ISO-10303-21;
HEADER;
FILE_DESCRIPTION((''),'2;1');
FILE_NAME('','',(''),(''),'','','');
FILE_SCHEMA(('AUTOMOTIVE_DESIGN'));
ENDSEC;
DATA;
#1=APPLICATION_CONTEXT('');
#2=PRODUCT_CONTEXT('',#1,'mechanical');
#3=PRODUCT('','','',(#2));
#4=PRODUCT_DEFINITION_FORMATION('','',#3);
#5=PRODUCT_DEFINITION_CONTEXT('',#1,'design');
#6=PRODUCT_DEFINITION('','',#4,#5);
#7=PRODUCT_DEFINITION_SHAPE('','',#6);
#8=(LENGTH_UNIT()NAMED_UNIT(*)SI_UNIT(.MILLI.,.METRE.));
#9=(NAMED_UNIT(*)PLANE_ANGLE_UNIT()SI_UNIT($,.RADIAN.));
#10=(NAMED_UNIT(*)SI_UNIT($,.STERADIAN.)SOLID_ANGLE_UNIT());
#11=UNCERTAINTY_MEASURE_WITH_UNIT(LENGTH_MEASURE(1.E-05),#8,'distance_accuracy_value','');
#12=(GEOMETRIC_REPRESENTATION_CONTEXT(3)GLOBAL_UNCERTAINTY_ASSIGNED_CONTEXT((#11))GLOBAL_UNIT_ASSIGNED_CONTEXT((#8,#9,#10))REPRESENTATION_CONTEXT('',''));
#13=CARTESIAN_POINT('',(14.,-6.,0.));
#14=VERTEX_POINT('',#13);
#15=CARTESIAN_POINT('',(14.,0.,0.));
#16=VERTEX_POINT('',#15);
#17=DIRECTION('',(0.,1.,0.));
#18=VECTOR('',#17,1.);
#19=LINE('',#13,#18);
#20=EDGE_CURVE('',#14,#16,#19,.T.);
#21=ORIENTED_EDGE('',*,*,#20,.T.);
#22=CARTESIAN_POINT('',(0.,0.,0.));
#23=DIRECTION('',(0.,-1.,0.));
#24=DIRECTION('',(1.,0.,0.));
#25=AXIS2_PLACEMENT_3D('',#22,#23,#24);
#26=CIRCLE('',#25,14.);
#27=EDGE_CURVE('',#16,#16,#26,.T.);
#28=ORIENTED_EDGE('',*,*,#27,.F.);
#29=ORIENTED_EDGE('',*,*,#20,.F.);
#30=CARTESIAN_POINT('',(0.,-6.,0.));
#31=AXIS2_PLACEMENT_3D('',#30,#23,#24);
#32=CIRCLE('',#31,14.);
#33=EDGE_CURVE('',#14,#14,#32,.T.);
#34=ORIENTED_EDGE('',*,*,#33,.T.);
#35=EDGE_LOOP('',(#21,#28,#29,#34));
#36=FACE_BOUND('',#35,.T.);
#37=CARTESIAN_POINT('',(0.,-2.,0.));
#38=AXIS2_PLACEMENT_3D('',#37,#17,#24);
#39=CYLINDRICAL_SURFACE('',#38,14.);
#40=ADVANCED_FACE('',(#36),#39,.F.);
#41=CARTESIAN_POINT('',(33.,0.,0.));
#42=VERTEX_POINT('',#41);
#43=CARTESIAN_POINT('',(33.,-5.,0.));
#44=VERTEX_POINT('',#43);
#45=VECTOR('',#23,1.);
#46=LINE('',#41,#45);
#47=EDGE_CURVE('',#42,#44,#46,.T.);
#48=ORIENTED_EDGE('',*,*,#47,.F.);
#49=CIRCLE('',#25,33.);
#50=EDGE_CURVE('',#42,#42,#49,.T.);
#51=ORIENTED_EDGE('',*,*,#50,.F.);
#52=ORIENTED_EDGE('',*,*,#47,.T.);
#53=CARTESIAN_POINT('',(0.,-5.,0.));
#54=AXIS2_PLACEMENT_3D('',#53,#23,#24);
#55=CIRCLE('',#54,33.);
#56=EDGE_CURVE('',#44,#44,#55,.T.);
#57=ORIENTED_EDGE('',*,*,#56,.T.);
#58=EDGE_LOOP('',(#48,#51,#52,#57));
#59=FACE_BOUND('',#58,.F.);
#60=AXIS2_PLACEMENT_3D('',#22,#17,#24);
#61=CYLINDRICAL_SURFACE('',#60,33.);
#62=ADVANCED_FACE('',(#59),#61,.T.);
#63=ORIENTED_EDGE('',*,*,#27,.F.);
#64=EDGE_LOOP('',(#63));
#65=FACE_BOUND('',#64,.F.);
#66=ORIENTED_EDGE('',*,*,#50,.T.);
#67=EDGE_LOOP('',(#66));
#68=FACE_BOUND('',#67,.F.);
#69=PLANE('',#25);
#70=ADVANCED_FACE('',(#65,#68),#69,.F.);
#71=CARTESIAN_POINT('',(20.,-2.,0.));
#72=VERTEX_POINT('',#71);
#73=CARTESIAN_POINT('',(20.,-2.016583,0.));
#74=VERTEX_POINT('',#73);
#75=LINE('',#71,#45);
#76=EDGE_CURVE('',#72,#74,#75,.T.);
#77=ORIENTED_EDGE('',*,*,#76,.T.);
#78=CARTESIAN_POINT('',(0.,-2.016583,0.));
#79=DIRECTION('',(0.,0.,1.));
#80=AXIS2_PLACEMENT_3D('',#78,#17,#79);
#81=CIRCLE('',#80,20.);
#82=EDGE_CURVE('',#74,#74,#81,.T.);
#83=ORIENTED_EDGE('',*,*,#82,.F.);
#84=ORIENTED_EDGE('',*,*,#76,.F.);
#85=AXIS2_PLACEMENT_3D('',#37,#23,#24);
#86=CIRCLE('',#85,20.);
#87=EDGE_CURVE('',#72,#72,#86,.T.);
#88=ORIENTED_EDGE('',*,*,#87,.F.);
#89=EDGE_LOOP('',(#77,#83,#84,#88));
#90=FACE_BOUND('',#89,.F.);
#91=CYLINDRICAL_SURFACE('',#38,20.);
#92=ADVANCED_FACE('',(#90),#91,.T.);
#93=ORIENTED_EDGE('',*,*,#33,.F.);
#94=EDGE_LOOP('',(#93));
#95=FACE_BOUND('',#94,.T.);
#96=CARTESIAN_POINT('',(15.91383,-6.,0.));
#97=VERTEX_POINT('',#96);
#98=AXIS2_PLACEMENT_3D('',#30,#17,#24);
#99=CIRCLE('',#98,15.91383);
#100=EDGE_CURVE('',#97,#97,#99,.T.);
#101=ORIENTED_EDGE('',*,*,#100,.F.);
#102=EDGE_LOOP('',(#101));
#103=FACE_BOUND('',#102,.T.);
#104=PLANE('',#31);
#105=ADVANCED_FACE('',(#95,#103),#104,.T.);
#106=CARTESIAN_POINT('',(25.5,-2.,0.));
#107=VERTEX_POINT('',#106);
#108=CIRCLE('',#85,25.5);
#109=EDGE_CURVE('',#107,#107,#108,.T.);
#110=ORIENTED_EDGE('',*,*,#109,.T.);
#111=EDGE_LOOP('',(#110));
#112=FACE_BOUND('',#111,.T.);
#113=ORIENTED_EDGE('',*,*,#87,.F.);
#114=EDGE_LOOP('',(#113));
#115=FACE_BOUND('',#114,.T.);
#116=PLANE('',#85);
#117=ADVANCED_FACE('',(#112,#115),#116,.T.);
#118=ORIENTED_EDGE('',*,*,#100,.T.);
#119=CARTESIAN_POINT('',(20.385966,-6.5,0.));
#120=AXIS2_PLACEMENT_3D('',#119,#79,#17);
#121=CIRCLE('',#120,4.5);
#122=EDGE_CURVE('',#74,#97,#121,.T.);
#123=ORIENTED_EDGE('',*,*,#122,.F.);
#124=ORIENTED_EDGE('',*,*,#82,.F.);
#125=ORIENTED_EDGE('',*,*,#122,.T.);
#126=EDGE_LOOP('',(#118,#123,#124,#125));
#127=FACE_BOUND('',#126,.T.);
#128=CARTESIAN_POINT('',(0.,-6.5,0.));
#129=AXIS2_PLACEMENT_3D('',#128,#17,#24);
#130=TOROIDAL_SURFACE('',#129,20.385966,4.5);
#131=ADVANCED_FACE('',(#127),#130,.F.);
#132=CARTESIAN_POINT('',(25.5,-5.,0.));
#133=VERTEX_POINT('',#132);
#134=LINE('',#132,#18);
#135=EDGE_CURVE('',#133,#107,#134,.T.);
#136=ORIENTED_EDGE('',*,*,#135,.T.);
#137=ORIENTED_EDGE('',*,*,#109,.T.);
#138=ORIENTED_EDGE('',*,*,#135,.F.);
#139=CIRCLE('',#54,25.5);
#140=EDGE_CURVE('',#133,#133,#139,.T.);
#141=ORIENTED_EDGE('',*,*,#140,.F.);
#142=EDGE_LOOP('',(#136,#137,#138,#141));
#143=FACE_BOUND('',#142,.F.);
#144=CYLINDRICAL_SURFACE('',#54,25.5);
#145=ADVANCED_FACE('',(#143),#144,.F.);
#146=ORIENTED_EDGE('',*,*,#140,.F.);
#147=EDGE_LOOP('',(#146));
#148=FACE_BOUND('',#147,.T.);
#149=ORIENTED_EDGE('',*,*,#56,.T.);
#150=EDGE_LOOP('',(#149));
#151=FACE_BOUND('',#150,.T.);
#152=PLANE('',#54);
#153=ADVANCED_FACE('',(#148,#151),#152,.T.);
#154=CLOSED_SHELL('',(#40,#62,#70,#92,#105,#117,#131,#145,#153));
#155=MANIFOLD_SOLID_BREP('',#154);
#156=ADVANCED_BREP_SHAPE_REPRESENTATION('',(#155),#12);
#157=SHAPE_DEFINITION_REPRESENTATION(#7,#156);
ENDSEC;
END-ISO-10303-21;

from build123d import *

# Parameters (mm, degrees)
F0_R     = 33
F0_R_2   = 14
F1_DEPTH = 5
F2_R     = 25.5
F2_R_2   = 14
F3_DEPTH = 3
F4_R     = 20
F4_R_2   = 14
F5_DEPTH = 4


with BuildPart() as f1:
    # F0 (on Front) → F1 (new body)
    with BuildSketch(Plane.XZ):
        Circle(F0_R)
        Circle(F0_R_2, mode=Mode.SUBTRACT)
    extrude(amount=F1_DEPTH)

    # F2 (on face) → F3 (cut)
    with BuildSketch(Plane.XZ.offset(5)):
        Circle(F2_R)
        Circle(F2_R_2, mode=Mode.SUBTRACT)
    extrude(amount=-F3_DEPTH, mode=Mode.SUBTRACT)

    # F4 (on face) → F5 (join)
    with BuildSketch(Plane.XZ.offset(2)):
        Circle(F4_R)
        Circle(F4_R_2, mode=Mode.SUBTRACT)
    extrude(amount=F5_DEPTH)

    # F6 (on Top) → F7 (revolve, cut)
    with BuildSketch(Plane.XY):
        with BuildLine():
            ThreePointArc((20.3859657049, -2), (17.2039851896, -9.6819805153), (24.8859657049, -6.5))
            ThreePointArc((24.8859657049, -6.5), (23.5679462203, -3.3180194847), (20.3859657049, -2))
        make_face()
    revolve(axis=Axis((0, -6, 0), (0, -1, 0)), mode=Mode.SUBTRACT)


solid = f1.part
